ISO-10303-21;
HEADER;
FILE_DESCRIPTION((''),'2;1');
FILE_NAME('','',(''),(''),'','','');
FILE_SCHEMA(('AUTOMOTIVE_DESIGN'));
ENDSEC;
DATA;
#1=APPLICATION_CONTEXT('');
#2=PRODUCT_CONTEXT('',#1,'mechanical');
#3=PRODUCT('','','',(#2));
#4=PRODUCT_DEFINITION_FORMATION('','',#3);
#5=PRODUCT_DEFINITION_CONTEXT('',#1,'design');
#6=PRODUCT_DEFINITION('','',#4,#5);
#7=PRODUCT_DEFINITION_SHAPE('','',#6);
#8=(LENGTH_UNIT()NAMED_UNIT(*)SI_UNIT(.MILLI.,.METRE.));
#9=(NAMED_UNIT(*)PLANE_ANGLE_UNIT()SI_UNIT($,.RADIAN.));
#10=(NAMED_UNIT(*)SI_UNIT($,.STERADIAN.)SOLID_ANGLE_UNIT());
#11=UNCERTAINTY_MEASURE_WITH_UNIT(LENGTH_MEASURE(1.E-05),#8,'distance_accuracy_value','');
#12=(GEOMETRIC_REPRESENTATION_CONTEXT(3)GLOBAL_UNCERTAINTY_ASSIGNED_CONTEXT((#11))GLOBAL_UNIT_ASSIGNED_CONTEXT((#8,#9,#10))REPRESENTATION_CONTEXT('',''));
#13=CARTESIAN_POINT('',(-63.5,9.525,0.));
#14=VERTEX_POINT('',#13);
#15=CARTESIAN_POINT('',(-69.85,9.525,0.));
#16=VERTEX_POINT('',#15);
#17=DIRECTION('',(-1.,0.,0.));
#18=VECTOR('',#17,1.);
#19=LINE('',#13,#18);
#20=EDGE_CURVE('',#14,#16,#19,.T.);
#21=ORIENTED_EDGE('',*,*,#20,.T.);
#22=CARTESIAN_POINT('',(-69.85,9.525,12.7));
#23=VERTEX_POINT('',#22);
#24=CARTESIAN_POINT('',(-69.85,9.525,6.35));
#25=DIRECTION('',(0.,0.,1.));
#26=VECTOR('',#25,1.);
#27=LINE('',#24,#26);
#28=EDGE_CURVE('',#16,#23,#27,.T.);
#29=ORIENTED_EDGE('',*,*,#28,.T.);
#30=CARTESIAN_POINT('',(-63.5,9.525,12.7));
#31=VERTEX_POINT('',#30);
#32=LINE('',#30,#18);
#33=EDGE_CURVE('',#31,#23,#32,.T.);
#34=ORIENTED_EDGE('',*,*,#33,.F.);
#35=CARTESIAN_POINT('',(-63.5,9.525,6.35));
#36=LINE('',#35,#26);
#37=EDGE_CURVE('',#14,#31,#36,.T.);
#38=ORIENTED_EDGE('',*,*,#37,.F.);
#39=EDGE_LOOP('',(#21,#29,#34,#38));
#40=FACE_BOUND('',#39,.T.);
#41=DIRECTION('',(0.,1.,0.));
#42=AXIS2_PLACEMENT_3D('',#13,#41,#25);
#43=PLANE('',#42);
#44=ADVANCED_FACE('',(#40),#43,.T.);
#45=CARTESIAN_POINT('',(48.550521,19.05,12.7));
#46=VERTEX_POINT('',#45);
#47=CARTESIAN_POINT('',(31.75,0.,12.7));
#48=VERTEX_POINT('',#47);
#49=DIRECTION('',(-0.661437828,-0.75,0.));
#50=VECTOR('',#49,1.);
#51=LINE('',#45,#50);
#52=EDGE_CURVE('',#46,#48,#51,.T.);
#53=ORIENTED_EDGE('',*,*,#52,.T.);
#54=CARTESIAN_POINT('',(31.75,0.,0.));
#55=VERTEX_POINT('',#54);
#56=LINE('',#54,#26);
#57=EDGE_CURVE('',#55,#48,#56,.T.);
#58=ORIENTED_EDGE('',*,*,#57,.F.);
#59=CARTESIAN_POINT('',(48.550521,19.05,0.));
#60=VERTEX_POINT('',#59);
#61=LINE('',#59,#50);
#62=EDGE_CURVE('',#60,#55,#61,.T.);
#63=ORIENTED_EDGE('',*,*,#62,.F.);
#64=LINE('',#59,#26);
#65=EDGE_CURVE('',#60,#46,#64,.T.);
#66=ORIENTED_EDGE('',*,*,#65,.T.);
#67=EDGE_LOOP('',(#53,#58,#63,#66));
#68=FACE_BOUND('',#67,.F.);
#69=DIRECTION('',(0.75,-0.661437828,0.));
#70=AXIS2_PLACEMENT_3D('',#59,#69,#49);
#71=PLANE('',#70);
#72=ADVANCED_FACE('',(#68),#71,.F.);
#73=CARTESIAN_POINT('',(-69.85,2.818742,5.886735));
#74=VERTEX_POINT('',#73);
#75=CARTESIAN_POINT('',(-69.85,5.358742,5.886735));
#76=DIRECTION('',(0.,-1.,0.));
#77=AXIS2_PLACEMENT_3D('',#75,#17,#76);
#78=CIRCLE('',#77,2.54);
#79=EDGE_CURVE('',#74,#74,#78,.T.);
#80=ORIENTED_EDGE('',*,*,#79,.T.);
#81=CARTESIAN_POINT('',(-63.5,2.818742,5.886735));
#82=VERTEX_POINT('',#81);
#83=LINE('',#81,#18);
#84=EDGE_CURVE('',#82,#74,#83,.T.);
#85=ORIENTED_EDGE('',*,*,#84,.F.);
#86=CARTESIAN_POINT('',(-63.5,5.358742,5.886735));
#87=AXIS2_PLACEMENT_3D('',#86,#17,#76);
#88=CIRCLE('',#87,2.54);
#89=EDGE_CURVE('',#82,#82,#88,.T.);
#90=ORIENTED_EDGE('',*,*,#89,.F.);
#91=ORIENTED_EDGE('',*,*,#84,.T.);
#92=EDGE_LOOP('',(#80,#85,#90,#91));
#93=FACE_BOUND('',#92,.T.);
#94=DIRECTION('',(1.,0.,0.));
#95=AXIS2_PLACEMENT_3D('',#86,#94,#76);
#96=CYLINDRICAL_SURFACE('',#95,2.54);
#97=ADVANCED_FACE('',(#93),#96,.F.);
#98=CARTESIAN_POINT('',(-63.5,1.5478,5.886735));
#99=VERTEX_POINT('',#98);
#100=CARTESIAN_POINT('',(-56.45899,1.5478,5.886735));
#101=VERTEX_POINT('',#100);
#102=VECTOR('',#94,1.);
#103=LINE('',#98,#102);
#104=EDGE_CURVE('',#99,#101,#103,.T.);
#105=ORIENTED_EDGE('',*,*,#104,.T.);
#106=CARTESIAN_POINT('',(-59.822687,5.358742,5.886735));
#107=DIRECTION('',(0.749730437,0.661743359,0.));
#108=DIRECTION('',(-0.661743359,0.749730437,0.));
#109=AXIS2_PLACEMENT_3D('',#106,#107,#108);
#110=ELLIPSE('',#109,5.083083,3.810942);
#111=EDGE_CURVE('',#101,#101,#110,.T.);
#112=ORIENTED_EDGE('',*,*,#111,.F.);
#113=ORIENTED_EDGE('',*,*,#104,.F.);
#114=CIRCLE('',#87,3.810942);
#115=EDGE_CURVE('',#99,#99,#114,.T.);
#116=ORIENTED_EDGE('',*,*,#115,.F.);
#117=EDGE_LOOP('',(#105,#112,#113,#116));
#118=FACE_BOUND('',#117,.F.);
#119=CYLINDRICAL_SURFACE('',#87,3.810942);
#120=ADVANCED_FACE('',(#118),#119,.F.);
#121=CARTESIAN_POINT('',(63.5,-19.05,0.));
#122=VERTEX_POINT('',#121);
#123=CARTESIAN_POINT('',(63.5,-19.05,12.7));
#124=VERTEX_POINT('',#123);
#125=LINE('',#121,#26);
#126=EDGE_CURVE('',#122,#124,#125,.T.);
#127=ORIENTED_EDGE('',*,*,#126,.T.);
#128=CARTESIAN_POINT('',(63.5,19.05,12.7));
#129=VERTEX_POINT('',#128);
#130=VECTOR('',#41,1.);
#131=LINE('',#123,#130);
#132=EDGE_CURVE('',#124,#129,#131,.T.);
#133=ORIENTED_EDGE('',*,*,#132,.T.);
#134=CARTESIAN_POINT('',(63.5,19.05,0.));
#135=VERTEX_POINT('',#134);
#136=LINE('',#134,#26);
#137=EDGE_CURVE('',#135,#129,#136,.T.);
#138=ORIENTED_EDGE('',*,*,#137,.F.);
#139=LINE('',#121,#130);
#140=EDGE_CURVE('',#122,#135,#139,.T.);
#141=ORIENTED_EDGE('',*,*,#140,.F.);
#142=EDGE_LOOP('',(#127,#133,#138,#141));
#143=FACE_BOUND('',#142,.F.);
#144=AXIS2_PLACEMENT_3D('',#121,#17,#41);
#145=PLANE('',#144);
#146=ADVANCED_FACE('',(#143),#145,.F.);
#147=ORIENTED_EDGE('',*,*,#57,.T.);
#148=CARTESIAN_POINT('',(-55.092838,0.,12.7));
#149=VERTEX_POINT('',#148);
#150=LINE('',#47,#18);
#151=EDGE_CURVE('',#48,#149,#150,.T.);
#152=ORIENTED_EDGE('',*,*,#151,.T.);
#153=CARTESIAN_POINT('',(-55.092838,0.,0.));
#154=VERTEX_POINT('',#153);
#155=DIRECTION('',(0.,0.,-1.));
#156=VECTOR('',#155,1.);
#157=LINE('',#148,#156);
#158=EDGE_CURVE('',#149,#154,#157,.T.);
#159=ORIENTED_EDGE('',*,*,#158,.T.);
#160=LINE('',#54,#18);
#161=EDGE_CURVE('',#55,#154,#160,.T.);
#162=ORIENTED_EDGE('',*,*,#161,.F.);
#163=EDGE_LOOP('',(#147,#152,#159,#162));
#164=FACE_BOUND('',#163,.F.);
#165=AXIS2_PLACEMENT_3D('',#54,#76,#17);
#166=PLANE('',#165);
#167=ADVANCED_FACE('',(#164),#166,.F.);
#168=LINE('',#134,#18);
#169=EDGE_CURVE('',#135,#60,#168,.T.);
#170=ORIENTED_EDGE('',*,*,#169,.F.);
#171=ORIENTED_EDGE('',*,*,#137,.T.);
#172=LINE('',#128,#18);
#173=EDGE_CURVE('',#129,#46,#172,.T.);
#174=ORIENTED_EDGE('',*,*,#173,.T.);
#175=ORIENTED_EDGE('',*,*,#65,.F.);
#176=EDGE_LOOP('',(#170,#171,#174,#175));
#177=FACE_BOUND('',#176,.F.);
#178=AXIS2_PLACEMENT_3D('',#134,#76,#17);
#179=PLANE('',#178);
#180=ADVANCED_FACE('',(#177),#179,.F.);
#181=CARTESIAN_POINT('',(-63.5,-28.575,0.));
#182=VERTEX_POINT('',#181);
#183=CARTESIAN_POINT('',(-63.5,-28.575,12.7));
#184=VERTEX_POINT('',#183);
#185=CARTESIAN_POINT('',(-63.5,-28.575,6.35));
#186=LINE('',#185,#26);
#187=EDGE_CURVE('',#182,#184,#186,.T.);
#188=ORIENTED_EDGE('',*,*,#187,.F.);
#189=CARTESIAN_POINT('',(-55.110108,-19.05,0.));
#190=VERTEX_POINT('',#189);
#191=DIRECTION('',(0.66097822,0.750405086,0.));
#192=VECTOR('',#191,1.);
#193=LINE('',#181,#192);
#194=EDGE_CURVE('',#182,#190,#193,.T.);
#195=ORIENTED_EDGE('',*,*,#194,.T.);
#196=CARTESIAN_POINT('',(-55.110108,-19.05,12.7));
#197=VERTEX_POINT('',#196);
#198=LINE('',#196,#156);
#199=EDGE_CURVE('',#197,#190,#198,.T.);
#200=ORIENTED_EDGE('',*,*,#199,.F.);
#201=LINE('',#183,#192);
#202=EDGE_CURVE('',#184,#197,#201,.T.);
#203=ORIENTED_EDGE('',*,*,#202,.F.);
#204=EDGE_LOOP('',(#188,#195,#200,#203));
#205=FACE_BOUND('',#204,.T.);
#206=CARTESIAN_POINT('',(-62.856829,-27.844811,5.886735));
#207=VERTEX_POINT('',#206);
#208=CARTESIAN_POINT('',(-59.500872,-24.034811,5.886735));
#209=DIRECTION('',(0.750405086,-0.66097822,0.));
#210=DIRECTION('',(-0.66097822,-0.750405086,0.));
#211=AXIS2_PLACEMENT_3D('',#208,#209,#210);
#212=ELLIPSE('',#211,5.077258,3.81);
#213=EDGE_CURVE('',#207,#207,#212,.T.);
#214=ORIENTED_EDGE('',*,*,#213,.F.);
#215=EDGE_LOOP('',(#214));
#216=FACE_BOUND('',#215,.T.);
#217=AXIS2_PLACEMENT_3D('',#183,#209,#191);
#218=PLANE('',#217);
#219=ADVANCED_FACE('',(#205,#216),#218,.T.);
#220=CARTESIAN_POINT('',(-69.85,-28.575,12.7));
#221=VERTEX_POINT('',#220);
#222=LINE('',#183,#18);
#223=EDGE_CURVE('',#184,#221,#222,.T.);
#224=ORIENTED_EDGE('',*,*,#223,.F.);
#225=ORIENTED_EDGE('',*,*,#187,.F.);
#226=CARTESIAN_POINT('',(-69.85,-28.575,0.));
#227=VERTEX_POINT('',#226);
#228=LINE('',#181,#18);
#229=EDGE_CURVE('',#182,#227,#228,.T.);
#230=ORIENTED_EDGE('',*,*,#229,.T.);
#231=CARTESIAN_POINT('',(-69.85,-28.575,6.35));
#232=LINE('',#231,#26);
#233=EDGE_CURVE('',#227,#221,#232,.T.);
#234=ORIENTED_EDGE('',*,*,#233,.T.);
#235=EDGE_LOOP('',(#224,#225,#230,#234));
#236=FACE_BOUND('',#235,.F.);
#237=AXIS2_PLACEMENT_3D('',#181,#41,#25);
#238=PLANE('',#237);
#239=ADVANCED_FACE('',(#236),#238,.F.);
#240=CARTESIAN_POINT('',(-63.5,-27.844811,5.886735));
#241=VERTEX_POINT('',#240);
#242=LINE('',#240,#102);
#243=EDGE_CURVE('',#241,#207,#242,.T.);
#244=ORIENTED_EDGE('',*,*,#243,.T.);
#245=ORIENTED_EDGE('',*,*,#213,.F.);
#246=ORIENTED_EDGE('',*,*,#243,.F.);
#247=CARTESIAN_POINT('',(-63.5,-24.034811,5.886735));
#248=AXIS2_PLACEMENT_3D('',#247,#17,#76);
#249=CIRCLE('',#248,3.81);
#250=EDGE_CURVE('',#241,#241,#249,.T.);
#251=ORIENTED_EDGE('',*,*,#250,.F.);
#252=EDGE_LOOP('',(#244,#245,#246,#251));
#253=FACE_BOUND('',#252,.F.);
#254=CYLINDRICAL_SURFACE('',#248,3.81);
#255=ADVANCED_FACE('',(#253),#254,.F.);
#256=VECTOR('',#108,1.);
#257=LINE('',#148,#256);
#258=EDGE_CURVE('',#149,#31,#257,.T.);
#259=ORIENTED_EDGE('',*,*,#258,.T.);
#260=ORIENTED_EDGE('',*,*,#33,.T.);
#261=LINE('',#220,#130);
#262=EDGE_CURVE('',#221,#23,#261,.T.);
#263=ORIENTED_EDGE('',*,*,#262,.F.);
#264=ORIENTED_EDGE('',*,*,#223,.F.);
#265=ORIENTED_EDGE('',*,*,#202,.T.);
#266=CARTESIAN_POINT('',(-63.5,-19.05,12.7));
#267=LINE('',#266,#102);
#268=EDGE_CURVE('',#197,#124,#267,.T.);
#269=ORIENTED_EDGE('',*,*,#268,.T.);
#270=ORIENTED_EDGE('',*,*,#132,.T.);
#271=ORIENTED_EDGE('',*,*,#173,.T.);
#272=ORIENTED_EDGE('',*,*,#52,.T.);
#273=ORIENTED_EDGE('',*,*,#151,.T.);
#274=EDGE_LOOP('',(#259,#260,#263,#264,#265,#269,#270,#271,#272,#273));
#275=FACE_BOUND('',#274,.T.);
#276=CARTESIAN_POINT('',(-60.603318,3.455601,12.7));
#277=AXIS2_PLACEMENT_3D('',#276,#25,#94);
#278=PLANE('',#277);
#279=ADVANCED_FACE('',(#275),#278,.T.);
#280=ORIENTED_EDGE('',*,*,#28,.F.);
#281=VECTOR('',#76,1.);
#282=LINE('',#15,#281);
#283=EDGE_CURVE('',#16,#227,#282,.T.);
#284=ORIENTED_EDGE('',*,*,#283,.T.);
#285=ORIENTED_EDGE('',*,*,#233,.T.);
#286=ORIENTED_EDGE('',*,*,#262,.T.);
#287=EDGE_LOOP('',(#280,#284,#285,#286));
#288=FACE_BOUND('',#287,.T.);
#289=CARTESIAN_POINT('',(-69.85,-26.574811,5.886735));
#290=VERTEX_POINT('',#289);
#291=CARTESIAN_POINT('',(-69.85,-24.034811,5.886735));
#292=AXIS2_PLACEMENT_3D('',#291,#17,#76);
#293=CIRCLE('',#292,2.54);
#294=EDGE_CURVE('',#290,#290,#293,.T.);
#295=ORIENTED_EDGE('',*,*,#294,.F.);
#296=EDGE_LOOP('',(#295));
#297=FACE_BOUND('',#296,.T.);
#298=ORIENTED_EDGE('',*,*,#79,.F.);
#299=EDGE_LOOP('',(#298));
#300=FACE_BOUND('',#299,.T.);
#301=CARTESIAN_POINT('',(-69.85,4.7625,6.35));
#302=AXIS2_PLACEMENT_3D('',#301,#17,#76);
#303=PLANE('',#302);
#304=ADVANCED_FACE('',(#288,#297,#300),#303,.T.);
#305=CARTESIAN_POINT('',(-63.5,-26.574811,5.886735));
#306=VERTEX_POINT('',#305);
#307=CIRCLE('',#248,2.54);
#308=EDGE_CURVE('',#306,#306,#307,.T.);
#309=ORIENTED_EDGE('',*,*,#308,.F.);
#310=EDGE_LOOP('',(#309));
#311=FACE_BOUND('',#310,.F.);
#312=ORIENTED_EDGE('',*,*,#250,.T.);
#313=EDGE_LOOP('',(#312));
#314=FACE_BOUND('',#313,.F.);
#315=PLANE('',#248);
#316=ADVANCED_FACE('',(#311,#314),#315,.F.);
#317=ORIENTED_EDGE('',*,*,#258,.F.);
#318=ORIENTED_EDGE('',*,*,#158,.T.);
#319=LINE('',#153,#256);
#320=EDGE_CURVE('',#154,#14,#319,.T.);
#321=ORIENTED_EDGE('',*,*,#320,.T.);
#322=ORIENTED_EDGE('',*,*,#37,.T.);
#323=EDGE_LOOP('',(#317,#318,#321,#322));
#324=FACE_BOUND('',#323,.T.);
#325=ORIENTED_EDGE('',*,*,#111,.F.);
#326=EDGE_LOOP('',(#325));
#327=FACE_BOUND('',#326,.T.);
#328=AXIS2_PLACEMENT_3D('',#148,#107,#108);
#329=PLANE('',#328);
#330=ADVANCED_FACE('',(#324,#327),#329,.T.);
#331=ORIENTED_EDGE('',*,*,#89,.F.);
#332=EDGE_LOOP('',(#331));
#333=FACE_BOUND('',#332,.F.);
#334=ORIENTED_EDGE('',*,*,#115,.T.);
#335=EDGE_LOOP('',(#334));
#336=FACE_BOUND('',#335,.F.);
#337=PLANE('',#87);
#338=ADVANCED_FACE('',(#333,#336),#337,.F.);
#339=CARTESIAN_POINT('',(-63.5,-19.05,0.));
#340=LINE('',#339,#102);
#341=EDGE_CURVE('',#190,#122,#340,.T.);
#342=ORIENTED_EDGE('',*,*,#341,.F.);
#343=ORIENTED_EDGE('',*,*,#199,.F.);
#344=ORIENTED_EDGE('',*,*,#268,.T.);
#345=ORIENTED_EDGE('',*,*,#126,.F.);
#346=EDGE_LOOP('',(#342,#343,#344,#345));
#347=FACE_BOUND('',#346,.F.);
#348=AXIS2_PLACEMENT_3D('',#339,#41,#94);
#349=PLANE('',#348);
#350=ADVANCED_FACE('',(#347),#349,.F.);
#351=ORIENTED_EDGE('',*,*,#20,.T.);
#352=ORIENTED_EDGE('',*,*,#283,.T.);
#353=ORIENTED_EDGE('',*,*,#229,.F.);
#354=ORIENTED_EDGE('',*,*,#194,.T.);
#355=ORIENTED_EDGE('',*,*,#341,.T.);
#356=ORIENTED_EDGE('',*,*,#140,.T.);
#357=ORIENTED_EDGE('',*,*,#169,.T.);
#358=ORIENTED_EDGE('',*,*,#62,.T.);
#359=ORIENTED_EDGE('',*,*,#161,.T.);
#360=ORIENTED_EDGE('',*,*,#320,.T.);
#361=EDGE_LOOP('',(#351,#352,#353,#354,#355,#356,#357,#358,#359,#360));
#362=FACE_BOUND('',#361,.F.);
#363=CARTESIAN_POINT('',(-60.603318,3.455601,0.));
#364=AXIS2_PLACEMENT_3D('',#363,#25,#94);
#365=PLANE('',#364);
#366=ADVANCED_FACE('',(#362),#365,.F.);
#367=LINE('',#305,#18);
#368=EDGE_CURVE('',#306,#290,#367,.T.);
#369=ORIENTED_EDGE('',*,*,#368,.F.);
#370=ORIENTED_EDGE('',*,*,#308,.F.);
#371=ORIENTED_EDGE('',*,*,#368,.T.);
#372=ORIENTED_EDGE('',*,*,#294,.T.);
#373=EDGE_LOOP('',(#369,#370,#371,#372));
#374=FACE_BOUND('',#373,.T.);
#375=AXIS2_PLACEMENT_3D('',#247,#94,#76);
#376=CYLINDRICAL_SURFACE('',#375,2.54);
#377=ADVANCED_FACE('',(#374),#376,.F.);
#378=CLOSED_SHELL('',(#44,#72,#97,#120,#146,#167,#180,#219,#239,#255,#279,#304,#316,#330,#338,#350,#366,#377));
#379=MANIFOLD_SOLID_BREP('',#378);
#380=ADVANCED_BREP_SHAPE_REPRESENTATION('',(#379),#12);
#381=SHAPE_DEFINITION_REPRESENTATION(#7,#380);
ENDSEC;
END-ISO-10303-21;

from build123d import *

# Parameters (mm, degrees)
F1_DEPTH  = 12.7
F2_W      = 9.525
F2_H      = 12.7
F2_R      = 2.54
F2_W_2    = 19.05
F3_DEPTH  = 6.35
F4_DEPTH  = 25.4
F6_DEPTH  = 12.7
F7_DEPTH  = 12.7
F8_R      = 3.8109417559
F8_R_2    = 2.54
F9_DEPTH  = 25.4
F10_R     = 3.81
F10_R_2   = 2.54
F11_DEPTH = 25.4


with BuildPart() as f1:
    # F0 (on Top) → F1 (new body)
    with BuildSketch(Plane.XY):
        Polygon((63.5, 19.05), (48.5505208253, 19.05), (31.75, 0), (-63.5, 0), (-63.5, -19.05), (63.5, -19.05), align=None)
    extrude(amount=F1_DEPTH)

    # F2 (on face) → F3 (join)
    with BuildSketch(Plane(origin=(-63.5, 0, 0), x_dir=(0, -1, 0), z_dir=(-1, 0, 0))):
        with Locations((-4.7625, 6.35)):
            Rectangle(F2_W, F2_H)
        with Locations((-5.3587416187, 5.8867353946)):
            Circle(F2_R, mode=Mode.SUBTRACT)
        with Locations((9.525, 6.35)):
            Rectangle(F2_W_2, F2_H)
        with Locations((23.8125, 6.35)):
            Rectangle(F2_W, F2_H)
        with Locations((24.0348111838, 5.8867353946)):
            Circle(F2_R, mode=Mode.SUBTRACT)
    extrude(amount=F3_DEPTH)

    # F2 (on face) → F4 (cut)
    with BuildSketch(Plane(origin=(-63.5, 0, 0), x_dir=(0, -1, 0), z_dir=(-1, 0, 0))):
        with Locations((24.0348111838, 5.8867353946)):
            Circle(F2_R)
    extrude(amount=F4_DEPTH, mode=Mode.SUBTRACT)

    # F5 (on face) → F6 (join)
    with BuildSketch(Plane.XY.offset(12.7)):
        Polygon((-55.0928376615, 0), (-63.5, 9.525), (-63.5, 0), align=None)
    extrude(amount=-F6_DEPTH)

    # F5 (on face) → F7 (join)
    with BuildSketch(Plane.XY.offset(12.7)):
        Polygon((-63.5, -19.05), (-63.5, -28.575), (-55.1101081073, -19.05), align=None)
    extrude(amount=-F7_DEPTH)

    # F8 (on face) → F9 (cut)
    with BuildSketch(Plane(origin=(-63.5, 0, 0), x_dir=(0, -1, 0), z_dir=(-1, 0, 0))):
        with Locations((-5.3587416187, 5.8867353946)):
            Circle(F8_R)
        with Locations((-5.3587416187, 5.8867353946)):
            Circle(F8_R_2, mode=Mode.SUBTRACT)
        with Locations((-5.3587416187, 5.8867353946)):
            Circle(F8_R_2)
    extrude(amount=-F9_DEPTH, mode=Mode.SUBTRACT)

    # F10 (on face) → F11 (cut)
    with BuildSketch(Plane(origin=(-63.5, 0, 0), x_dir=(0, -1, 0), z_dir=(-1, 0, 0))):
        with Locations((24.0348111838, 5.8867353946)):
            Circle(F10_R)
        with Locations((24.0348111838, 5.8867353946)):
            Circle(F10_R_2, mode=Mode.SUBTRACT)
        with Locations((24.0348111838, 5.8867353946)):
            Circle(F10_R_2)
    extrude(amount=-F11_DEPTH, mode=Mode.SUBTRACT)


solid = f1.part
